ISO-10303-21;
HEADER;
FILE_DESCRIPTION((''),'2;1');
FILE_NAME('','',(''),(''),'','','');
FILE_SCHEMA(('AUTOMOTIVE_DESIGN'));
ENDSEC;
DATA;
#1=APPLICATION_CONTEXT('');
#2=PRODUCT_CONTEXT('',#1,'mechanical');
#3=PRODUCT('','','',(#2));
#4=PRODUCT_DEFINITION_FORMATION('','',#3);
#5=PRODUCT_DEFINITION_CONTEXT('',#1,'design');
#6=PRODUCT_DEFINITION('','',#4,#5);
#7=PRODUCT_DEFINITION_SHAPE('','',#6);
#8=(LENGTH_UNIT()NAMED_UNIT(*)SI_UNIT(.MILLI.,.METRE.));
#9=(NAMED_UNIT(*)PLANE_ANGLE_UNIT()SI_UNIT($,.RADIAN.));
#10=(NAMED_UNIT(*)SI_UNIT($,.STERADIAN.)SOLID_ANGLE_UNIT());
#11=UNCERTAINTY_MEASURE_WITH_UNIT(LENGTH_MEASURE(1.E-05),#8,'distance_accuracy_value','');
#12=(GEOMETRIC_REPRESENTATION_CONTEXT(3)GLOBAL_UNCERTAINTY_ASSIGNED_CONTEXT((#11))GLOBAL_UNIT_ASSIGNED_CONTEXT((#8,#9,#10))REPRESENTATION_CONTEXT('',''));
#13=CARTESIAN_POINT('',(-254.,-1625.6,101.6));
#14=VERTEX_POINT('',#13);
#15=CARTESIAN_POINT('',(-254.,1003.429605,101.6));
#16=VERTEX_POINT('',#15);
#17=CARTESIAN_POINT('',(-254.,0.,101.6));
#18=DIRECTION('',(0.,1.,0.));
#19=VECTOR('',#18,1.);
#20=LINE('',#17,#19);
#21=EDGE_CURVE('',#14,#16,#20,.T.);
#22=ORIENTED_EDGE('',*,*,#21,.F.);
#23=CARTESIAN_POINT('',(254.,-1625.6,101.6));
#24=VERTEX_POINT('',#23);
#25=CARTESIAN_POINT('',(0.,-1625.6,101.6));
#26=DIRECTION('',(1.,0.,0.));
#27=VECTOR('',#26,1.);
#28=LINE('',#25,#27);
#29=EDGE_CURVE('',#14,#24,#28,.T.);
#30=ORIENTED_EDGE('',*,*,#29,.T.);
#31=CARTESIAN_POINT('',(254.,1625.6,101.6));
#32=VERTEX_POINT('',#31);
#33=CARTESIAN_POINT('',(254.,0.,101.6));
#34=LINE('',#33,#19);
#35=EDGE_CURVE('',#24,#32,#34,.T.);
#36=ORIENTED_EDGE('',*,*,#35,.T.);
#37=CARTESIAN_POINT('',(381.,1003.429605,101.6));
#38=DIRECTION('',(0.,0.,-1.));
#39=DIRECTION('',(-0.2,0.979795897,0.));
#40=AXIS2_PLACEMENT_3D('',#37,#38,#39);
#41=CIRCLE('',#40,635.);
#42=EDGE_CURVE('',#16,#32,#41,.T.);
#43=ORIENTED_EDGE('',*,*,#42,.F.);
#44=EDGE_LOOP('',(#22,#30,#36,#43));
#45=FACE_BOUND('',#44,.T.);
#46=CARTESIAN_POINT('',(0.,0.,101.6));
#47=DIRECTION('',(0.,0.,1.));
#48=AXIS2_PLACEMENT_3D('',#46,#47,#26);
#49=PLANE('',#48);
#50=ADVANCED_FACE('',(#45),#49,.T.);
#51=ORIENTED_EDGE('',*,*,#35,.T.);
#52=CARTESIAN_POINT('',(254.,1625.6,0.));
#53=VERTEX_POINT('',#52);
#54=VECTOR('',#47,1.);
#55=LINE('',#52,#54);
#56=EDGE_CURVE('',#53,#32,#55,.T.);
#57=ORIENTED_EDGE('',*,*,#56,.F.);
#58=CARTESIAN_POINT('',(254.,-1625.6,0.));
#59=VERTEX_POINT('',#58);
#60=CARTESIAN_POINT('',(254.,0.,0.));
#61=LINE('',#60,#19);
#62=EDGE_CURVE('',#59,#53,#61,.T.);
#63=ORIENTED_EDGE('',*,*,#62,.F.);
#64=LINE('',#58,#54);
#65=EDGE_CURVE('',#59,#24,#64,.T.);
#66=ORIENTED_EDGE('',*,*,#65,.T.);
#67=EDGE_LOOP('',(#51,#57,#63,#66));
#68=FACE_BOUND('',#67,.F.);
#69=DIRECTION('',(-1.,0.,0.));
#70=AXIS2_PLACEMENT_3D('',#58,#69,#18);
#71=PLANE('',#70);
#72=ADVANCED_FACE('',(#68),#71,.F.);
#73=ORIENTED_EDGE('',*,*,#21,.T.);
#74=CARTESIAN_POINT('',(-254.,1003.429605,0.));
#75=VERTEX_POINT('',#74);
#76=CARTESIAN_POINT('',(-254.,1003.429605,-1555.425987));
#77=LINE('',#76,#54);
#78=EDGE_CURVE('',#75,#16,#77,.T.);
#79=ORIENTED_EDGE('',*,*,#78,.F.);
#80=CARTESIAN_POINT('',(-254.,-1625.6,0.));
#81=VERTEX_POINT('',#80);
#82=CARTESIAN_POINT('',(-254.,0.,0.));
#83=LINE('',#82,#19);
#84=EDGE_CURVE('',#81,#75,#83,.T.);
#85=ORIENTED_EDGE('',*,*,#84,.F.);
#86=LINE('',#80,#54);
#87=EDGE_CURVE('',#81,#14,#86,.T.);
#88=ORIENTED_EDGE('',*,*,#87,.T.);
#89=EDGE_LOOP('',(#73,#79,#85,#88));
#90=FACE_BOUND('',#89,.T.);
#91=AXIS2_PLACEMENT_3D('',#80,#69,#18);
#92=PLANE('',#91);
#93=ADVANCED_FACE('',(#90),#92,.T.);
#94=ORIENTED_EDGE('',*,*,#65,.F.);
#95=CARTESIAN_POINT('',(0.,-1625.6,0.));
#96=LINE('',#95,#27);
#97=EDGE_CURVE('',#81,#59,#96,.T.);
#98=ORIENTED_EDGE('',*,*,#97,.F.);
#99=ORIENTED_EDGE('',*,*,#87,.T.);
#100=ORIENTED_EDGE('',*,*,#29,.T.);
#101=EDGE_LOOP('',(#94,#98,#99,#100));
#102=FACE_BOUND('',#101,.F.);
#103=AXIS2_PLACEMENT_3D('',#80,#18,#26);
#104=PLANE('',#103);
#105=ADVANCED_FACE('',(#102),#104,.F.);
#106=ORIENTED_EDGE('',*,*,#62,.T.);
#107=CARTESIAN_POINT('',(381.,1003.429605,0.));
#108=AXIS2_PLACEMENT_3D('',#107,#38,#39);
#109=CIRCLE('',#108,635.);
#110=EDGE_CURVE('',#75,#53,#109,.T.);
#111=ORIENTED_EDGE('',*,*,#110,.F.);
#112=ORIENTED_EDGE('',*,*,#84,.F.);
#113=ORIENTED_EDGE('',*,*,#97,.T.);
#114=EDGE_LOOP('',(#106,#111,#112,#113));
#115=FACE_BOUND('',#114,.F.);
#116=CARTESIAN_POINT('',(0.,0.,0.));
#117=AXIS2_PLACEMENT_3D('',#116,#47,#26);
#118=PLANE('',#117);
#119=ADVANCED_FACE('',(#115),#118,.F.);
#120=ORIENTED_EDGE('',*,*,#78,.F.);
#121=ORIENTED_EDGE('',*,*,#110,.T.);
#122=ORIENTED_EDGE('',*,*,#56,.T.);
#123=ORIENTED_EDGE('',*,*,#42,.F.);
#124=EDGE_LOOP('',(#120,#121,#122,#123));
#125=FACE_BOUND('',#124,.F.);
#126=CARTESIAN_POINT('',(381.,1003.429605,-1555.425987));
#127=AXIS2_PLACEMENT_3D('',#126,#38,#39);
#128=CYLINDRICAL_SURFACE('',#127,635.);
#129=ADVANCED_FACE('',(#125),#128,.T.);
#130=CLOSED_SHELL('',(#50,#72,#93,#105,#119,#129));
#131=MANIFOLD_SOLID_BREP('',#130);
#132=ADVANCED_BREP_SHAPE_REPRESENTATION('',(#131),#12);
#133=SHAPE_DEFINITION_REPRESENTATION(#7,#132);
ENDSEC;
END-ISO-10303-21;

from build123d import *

# Parameters (mm, degrees)
F0_W        = 508
F0_H        = 3251.2
F1_DEPTH    = 101.6
F2_T1_DEPTH = 3212.4519733346


# Not quite as in the source:
# - a fillet or chamfer that OpenCascade refuses, or shapes differently, is made with other operations: its cross-section is extruded or revolved along the edge and cut away or added


with BuildPart() as f1:
    # F0 (on Top) → F1 (new body)
    with BuildSketch(Plane.XY):
        Rectangle(F0_W, F0_H)
    extrude(amount=F1_DEPTH)

    # F2: fillet of radius 635 on 1 edges, made by hand

    # F2_s2 → F2_t1 (cut)
    with BuildSketch(Plane.XY.offset(-1555.4259866673)):
        with BuildLine():
            ThreePointArc((254, 1625.6), (-110.8688849683, 1405.0388681745), (-254, 1003.4296053331))
            Line((-254, 1003.4296053331), (-254, 1625.6))
            Line((-254, 1625.6), (254, 1625.6))
        make_face()
    extrude(amount=F2_T1_DEPTH, mode=Mode.SUBTRACT)


solid = f1.part
